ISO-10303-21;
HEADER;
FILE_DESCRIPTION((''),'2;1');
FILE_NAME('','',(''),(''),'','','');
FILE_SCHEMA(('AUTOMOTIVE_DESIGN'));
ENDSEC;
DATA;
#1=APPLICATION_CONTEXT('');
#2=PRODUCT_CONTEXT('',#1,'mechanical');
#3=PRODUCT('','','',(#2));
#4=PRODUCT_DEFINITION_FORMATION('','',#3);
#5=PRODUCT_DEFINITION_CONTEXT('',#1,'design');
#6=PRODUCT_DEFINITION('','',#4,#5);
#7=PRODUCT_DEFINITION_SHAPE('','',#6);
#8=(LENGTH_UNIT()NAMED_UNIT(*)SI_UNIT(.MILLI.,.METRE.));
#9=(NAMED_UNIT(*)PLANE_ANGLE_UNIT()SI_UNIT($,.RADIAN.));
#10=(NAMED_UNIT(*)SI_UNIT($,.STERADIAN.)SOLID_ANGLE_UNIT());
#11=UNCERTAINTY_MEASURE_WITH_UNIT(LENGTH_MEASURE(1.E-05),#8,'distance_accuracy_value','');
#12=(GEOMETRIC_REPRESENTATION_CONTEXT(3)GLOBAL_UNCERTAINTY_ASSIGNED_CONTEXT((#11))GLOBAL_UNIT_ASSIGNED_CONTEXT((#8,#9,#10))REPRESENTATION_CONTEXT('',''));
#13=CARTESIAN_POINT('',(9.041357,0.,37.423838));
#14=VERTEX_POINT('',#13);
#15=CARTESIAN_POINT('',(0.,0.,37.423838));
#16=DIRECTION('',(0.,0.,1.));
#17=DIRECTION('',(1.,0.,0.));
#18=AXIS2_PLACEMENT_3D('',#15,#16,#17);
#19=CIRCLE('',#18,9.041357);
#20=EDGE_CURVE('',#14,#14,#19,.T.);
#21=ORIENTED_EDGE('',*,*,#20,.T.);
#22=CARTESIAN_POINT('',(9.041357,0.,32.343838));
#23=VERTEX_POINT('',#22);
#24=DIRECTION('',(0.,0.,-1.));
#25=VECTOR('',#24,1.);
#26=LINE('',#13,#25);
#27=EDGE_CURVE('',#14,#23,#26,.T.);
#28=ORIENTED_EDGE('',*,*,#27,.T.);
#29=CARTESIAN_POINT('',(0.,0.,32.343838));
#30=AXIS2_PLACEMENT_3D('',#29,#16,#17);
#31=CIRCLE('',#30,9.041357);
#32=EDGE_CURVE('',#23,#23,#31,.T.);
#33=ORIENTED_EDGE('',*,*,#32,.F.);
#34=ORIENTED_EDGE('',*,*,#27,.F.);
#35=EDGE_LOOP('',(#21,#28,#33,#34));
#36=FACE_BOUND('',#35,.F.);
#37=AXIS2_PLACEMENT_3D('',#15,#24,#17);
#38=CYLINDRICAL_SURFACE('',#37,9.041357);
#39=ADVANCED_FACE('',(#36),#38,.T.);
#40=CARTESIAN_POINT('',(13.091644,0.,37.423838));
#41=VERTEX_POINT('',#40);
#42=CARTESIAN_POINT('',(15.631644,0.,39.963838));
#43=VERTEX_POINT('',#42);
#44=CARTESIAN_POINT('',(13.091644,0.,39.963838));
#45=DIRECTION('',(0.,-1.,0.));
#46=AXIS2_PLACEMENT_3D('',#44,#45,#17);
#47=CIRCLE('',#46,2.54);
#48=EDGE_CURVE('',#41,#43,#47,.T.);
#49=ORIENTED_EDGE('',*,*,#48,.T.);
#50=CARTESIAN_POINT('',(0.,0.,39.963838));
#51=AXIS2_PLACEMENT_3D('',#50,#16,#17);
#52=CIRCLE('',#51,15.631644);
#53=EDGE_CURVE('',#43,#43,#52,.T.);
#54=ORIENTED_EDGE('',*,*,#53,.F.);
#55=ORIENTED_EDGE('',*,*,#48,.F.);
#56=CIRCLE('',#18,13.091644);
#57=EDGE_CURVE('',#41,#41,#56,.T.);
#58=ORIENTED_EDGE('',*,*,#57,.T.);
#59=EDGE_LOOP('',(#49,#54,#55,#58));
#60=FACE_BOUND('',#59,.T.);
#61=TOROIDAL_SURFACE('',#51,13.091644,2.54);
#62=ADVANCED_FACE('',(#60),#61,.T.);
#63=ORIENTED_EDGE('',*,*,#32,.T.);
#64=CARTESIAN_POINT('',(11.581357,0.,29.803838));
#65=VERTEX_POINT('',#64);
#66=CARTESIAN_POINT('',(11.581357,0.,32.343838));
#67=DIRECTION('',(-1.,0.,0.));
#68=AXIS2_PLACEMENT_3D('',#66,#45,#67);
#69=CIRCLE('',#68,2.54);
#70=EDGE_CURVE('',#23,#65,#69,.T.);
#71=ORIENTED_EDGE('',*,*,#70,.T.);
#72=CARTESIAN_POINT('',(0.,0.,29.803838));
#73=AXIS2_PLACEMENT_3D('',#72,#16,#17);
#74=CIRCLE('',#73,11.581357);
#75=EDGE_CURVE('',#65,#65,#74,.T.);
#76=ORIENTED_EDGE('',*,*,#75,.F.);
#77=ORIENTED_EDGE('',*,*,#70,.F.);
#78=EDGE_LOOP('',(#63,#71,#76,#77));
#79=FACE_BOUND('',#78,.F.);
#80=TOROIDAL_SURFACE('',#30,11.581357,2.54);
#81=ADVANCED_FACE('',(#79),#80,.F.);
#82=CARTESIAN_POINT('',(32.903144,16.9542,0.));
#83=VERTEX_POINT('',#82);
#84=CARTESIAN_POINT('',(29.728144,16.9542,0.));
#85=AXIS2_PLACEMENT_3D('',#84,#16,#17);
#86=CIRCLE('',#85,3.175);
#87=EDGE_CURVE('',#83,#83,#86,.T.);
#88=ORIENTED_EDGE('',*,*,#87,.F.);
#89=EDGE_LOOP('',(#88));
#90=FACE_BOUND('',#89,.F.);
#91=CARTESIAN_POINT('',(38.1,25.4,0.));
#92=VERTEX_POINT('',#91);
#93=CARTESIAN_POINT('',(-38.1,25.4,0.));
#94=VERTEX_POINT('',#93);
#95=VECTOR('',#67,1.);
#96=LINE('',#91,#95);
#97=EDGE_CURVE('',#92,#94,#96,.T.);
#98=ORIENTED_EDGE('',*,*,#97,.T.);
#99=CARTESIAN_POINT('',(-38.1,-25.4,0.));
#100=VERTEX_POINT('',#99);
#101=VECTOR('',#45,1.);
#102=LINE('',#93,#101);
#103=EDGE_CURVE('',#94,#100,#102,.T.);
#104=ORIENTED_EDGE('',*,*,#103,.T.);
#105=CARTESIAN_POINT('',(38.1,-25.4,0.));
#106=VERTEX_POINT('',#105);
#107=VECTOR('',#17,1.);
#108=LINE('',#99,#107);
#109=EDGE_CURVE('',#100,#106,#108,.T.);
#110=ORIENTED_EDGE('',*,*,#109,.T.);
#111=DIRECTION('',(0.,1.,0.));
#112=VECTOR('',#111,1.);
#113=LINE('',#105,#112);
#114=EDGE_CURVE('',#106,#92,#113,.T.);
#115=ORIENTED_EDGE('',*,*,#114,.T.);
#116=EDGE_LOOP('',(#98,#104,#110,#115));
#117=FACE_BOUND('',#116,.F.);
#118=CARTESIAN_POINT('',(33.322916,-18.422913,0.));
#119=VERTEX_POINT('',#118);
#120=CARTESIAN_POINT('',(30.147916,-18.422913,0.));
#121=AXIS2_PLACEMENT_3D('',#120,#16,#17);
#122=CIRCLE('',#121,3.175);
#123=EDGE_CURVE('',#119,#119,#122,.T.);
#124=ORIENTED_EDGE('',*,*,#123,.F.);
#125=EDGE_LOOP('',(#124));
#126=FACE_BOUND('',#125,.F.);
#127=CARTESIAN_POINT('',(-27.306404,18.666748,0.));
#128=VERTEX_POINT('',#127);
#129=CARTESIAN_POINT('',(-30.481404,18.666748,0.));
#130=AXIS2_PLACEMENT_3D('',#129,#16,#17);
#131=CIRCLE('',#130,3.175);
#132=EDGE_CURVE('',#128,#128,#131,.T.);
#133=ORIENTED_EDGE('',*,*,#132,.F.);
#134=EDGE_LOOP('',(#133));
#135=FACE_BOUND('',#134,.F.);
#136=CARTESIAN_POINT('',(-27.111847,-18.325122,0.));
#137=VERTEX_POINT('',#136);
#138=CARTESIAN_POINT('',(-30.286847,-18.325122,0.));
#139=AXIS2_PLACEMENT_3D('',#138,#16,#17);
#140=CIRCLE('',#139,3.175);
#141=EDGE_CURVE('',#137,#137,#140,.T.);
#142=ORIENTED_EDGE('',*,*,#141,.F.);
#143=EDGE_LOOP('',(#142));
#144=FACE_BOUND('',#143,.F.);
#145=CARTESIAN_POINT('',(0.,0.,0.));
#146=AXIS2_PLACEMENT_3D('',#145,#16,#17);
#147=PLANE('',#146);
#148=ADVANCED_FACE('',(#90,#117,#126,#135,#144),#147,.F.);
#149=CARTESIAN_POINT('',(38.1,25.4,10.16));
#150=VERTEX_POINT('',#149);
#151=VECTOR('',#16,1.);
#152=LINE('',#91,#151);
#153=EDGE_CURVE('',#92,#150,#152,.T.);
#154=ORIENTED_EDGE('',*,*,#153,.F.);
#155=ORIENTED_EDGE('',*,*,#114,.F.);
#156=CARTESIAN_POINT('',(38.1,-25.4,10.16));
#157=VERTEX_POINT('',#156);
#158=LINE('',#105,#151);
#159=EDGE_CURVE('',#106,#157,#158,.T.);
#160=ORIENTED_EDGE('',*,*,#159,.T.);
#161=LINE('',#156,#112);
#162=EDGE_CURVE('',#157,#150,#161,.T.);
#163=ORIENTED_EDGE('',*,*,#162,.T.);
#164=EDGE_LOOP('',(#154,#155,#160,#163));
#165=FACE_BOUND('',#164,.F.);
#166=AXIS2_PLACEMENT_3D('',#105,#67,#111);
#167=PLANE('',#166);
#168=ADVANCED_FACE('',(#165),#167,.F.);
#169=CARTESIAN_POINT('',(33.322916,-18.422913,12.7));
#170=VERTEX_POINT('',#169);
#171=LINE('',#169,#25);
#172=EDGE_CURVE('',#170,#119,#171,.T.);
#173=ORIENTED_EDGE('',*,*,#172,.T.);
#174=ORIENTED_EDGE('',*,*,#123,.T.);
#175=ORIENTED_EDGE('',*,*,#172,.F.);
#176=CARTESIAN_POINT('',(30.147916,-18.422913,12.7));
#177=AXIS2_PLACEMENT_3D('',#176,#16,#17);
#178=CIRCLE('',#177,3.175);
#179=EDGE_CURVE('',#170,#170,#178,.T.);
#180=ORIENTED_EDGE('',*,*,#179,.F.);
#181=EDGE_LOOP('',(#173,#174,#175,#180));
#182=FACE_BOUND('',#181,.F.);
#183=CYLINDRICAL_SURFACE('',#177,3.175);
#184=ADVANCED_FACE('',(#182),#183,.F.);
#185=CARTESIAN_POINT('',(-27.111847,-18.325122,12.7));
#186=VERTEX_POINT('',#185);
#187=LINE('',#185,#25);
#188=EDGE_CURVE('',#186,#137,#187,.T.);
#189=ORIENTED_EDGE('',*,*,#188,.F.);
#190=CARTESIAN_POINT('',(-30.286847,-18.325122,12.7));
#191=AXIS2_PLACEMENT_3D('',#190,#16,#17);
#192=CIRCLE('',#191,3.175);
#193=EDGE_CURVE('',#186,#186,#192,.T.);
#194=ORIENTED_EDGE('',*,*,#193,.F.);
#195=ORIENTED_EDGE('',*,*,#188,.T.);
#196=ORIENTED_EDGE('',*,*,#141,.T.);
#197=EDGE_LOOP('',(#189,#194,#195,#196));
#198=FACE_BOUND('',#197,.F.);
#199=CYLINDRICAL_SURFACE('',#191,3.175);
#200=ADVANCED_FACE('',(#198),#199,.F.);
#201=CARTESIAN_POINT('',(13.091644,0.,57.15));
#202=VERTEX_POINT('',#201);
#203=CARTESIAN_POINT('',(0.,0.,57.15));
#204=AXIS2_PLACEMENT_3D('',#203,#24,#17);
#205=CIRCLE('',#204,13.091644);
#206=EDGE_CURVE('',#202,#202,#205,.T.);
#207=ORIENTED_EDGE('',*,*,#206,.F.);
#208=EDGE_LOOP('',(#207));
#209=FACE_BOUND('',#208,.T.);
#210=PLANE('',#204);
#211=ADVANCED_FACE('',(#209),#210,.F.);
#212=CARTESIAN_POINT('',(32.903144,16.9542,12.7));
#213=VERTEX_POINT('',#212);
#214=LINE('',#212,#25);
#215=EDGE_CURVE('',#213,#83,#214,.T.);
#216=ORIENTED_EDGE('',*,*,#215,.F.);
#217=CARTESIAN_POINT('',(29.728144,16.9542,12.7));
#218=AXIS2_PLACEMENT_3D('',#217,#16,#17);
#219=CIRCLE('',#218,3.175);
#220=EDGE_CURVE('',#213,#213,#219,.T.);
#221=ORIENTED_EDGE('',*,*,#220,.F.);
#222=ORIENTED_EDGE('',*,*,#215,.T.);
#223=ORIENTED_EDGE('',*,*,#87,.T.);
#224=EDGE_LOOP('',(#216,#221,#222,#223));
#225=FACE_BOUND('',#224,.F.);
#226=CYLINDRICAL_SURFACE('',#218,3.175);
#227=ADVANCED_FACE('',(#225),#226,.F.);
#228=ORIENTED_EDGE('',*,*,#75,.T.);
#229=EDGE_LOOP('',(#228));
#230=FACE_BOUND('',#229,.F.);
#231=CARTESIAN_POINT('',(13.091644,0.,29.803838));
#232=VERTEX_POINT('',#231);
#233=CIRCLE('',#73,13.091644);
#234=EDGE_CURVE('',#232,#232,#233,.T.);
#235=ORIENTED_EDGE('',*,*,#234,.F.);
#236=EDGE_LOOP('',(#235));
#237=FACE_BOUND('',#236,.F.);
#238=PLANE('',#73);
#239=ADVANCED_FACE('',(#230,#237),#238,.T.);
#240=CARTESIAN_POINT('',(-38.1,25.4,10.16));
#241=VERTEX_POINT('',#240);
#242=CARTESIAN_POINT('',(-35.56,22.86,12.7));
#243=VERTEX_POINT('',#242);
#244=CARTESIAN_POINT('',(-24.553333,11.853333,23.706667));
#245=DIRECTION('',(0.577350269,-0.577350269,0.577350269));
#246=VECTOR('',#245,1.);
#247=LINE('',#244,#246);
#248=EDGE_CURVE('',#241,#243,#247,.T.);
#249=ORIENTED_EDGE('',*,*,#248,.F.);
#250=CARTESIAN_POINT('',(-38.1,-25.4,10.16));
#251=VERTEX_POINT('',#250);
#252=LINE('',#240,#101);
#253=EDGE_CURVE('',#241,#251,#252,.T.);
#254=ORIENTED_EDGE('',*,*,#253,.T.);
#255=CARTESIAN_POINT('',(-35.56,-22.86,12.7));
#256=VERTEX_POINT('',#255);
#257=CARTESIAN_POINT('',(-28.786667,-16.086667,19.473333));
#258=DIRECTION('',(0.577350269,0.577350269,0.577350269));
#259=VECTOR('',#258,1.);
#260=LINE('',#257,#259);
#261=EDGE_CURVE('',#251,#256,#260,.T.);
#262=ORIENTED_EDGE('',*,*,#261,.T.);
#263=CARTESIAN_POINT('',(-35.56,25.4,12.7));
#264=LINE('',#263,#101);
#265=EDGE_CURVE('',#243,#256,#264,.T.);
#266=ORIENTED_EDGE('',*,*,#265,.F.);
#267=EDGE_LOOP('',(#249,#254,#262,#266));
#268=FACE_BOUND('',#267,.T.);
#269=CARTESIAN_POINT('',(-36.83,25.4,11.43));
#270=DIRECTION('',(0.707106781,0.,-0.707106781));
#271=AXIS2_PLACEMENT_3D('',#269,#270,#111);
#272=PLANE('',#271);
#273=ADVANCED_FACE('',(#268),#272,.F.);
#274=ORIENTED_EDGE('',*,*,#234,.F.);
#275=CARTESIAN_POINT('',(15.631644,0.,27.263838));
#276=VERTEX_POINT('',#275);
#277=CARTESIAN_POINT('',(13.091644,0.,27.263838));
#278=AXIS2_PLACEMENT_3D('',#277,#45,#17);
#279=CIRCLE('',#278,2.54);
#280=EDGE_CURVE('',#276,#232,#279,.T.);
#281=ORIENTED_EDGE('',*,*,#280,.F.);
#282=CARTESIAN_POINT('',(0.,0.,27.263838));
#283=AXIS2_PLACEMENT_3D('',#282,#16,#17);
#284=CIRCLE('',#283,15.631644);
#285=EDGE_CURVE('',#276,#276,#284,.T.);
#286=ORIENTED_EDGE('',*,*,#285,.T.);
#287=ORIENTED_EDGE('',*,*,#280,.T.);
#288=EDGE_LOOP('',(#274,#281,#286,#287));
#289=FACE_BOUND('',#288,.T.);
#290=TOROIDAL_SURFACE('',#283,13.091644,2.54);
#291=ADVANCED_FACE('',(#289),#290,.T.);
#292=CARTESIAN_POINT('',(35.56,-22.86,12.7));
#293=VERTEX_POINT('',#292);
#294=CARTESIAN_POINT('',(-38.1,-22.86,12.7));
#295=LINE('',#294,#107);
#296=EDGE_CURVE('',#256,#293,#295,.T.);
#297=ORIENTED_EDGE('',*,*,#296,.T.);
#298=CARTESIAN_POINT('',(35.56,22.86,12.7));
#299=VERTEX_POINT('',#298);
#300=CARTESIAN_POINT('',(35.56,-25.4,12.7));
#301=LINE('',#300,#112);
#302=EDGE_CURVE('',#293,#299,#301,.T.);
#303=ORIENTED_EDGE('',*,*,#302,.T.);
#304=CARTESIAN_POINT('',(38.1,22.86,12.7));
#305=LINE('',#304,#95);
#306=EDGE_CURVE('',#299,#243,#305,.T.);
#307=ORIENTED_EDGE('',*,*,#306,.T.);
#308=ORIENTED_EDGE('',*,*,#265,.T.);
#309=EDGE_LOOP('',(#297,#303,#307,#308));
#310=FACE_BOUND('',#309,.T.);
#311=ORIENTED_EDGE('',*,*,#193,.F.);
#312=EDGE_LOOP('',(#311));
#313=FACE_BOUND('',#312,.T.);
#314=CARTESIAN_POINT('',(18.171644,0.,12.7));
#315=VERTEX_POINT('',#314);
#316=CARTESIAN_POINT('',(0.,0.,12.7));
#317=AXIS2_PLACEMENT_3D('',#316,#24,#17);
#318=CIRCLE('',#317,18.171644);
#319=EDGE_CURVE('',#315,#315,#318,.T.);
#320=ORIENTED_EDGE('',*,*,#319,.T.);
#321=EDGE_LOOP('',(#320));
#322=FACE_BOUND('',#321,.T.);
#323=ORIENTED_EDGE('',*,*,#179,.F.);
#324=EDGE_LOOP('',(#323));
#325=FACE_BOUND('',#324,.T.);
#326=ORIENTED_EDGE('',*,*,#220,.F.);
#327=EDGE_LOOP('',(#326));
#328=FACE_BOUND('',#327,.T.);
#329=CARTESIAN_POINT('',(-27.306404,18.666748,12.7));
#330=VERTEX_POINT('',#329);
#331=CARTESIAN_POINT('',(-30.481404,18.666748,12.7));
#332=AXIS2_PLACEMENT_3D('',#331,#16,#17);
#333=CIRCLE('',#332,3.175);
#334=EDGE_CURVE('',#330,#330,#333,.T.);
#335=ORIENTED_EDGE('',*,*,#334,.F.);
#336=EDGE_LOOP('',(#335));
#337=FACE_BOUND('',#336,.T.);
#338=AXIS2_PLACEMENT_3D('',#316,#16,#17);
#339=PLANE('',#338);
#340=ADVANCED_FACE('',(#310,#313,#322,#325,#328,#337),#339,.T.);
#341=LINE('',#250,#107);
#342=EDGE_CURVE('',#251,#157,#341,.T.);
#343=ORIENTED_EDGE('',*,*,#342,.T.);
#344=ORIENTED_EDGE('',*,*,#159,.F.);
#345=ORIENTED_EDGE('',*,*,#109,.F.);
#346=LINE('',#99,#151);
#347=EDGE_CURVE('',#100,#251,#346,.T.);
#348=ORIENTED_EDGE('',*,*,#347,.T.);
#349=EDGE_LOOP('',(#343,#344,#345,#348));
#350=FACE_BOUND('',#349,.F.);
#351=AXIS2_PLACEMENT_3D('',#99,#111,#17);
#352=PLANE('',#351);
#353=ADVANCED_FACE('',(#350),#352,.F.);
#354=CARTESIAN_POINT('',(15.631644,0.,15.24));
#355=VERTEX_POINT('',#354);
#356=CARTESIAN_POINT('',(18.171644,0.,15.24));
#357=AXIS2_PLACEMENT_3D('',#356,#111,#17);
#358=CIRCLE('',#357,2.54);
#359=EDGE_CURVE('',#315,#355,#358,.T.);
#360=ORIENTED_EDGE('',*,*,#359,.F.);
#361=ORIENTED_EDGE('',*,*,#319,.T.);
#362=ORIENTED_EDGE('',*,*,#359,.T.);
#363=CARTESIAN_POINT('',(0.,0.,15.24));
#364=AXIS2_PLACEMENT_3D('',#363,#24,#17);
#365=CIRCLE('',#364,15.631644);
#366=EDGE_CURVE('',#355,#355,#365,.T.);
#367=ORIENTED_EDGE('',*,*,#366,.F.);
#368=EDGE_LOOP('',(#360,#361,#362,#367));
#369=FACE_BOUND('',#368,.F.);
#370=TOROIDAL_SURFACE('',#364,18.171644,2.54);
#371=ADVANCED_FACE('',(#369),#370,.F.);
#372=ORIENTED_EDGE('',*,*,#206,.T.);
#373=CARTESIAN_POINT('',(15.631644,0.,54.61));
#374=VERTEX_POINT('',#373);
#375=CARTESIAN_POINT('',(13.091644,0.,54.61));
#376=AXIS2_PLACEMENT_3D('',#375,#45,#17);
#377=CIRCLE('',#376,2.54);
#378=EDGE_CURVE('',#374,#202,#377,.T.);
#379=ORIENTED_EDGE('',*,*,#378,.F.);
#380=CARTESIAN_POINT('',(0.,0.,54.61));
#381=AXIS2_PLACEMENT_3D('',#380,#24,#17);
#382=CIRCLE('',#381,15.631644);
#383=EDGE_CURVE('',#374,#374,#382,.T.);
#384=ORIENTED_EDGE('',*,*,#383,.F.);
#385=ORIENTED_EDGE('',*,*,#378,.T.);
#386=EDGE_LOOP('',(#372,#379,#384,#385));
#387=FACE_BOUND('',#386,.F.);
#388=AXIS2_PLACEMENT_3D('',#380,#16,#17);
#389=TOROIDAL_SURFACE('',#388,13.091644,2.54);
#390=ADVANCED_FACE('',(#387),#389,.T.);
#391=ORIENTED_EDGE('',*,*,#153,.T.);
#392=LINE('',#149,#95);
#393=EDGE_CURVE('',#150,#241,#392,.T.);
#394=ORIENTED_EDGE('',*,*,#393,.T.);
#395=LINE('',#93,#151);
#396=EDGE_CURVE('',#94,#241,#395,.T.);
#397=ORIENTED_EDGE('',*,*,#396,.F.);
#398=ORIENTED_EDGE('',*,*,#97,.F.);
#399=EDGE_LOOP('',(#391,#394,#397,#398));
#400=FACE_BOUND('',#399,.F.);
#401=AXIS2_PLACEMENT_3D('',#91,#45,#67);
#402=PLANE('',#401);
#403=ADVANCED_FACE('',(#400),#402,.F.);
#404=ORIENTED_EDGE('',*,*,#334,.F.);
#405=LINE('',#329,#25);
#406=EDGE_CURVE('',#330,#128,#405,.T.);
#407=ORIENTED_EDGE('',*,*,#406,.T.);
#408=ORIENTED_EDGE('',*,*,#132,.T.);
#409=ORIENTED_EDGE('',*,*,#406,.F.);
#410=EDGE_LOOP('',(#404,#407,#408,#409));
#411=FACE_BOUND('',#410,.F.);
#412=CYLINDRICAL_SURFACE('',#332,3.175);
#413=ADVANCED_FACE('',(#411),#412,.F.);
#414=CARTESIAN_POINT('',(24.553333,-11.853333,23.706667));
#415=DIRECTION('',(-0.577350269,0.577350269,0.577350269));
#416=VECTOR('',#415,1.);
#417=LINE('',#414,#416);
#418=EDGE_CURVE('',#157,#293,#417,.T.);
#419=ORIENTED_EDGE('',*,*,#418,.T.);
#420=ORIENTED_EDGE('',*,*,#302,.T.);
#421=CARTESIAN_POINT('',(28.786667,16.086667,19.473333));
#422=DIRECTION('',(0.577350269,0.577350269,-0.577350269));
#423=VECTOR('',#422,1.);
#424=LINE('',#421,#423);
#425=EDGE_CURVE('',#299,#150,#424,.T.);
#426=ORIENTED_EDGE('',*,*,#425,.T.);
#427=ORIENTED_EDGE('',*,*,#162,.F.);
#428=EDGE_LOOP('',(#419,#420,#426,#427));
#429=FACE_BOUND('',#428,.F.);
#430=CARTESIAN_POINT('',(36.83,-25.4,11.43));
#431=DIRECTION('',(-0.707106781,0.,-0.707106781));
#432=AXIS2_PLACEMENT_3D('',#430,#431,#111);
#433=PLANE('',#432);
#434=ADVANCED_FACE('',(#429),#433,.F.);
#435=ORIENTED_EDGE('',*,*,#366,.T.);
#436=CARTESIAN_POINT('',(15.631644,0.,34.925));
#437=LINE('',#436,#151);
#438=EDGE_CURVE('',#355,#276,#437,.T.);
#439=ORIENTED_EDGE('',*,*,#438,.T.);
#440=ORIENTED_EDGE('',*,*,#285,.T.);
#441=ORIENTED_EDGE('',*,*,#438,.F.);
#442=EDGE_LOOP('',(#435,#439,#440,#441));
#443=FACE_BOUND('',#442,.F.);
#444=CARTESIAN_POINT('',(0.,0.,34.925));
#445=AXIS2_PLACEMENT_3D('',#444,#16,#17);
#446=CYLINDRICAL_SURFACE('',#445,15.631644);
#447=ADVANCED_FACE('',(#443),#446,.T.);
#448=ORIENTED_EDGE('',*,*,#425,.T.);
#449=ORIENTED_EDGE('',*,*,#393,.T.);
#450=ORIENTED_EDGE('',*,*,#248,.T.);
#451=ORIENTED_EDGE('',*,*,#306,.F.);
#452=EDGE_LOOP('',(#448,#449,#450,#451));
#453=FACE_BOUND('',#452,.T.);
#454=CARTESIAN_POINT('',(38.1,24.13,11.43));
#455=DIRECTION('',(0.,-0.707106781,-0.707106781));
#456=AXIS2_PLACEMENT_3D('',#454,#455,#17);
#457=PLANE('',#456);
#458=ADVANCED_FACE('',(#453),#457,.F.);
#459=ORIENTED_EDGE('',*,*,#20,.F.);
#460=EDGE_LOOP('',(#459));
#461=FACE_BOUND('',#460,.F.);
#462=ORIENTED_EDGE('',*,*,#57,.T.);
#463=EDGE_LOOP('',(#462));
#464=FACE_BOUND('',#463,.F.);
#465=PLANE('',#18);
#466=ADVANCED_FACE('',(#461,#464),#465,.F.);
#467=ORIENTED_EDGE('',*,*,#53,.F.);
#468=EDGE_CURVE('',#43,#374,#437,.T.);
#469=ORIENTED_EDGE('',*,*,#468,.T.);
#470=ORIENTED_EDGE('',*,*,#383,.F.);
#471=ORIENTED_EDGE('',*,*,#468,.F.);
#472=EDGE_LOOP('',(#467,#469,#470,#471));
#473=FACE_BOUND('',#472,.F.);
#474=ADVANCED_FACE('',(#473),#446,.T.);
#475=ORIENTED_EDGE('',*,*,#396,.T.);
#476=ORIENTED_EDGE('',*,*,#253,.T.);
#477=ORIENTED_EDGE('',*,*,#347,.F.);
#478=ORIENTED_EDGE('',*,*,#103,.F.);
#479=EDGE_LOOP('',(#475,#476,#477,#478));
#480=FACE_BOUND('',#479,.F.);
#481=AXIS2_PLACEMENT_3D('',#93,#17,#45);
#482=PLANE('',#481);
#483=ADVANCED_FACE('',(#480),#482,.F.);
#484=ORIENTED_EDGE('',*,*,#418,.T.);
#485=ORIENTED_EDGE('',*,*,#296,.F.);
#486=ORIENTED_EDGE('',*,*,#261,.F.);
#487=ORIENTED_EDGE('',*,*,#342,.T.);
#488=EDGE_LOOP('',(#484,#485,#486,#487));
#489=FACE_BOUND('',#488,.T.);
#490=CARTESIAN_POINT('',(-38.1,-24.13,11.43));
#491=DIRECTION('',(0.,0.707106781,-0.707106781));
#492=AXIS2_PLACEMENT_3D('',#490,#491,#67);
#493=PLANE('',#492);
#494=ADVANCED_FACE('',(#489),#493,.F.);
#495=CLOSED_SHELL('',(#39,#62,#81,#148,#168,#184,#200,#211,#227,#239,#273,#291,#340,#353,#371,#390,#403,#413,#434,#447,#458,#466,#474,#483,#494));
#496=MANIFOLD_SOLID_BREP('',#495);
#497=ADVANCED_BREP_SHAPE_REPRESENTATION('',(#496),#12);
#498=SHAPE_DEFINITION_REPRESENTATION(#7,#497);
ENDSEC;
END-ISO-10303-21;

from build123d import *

# Parameters (mm, degrees)
F1_DEPTH = 12.7
F2_R     = 3.175
F3_DEPTH = 25.4
F4_W     = 15.6316435844
F4_H     = 44.45
F6_SIZE  = 2.54
F9_R     = 2.54


# Not quite as in the source:
# - a feature names something its author has since deleted; it is built from what else it names


with BuildPart() as f1:
    # F0 (on Top) → F1 (new body)
    with BuildSketch(Plane.XY):
        Polygon((27.94, 25.4), (-27.94, 25.4), (-38.1, 25.4), (-38.1, 15.24), (-38.1, -15.24), (-38.1, -25.4), (-27.94, -25.4), (27.94, -25.4), (38.1, -25.4), (38.1, -15.24), (38.1, 15.24), (38.1, 25.4), align=None)
    extrude(amount=F1_DEPTH)

    # F2 (on face) → F3 (cut)
    with BuildSketch(Plane.XY.offset(12.7)):
        with Locations((-30.4814037019, 18.666748425)):
            Circle(F2_R)
        with Locations((29.7281444444, 16.9542004048)):
            Circle(F2_R)
        with Locations((30.147915706, -18.4229128063)):
            Circle(F2_R)
        with Locations((-30.2868466824, -18.3251220733)):
            Circle(F2_R)
    extrude(amount=-F3_DEPTH, mode=Mode.SUBTRACT)

    # F4 (on Front) → F5 (revolve)
    with BuildSketch(Plane.XZ):
        with Locations((7.8158217922, 34.925)):
            Rectangle(F4_W, F4_H)
    revolve(axis=Axis((0, 0, 34.925), (0, 0, -1)))

    # F6
    f6_edges = [f1.edges().sort_by_distance(p)[0] for p in [
        (0, -25.4, 12.7),
        (38.1, 0, 12.7),
        (0, 25.4, 12.7),
        (-38.1, 0, 12.7),
    ]]
    chamfer(f6_edges, length=F6_SIZE)

    # F7 (on Front) → F8 (revolve, cut)
    with BuildSketch(Plane.XZ):
        with BuildLine():
            Line((19.2013573515, 37.423838021), (9.0413573515, 37.423838021))
            Line((9.0413573515, 37.423838021), (9.0413573515, 32.343838021))
            ThreePointArc((9.0413573515, 32.343838021), (9.7853061273, 30.5477867968), (11.5813573515, 29.803838021))
            Line((11.5813573515, 29.803838021), (19.2013573515, 29.803838021))
            Line((19.2013573515, 29.803838021), (19.2013573515, 37.423838021))
        make_face()
    revolve(axis=Axis((0, 0, 12.7), (0, 0, 1)), mode=Mode.SUBTRACT)

    # F9
    f9_edges = [f1.edges().sort_by_distance(p)[0] for p in [
        (-15.631644, 0, 12.7),
        (-15.631644, 0, 57.15),
        (15.631644, 0, 21.251919),
        (-15.631644, 0, 29.803838),
        (-15.631644, 0, 37.423838),
        (15.631644, 0, 47.286919),
    ]]
    fillet(f9_edges, radius=F9_R)


solid = f1.part
